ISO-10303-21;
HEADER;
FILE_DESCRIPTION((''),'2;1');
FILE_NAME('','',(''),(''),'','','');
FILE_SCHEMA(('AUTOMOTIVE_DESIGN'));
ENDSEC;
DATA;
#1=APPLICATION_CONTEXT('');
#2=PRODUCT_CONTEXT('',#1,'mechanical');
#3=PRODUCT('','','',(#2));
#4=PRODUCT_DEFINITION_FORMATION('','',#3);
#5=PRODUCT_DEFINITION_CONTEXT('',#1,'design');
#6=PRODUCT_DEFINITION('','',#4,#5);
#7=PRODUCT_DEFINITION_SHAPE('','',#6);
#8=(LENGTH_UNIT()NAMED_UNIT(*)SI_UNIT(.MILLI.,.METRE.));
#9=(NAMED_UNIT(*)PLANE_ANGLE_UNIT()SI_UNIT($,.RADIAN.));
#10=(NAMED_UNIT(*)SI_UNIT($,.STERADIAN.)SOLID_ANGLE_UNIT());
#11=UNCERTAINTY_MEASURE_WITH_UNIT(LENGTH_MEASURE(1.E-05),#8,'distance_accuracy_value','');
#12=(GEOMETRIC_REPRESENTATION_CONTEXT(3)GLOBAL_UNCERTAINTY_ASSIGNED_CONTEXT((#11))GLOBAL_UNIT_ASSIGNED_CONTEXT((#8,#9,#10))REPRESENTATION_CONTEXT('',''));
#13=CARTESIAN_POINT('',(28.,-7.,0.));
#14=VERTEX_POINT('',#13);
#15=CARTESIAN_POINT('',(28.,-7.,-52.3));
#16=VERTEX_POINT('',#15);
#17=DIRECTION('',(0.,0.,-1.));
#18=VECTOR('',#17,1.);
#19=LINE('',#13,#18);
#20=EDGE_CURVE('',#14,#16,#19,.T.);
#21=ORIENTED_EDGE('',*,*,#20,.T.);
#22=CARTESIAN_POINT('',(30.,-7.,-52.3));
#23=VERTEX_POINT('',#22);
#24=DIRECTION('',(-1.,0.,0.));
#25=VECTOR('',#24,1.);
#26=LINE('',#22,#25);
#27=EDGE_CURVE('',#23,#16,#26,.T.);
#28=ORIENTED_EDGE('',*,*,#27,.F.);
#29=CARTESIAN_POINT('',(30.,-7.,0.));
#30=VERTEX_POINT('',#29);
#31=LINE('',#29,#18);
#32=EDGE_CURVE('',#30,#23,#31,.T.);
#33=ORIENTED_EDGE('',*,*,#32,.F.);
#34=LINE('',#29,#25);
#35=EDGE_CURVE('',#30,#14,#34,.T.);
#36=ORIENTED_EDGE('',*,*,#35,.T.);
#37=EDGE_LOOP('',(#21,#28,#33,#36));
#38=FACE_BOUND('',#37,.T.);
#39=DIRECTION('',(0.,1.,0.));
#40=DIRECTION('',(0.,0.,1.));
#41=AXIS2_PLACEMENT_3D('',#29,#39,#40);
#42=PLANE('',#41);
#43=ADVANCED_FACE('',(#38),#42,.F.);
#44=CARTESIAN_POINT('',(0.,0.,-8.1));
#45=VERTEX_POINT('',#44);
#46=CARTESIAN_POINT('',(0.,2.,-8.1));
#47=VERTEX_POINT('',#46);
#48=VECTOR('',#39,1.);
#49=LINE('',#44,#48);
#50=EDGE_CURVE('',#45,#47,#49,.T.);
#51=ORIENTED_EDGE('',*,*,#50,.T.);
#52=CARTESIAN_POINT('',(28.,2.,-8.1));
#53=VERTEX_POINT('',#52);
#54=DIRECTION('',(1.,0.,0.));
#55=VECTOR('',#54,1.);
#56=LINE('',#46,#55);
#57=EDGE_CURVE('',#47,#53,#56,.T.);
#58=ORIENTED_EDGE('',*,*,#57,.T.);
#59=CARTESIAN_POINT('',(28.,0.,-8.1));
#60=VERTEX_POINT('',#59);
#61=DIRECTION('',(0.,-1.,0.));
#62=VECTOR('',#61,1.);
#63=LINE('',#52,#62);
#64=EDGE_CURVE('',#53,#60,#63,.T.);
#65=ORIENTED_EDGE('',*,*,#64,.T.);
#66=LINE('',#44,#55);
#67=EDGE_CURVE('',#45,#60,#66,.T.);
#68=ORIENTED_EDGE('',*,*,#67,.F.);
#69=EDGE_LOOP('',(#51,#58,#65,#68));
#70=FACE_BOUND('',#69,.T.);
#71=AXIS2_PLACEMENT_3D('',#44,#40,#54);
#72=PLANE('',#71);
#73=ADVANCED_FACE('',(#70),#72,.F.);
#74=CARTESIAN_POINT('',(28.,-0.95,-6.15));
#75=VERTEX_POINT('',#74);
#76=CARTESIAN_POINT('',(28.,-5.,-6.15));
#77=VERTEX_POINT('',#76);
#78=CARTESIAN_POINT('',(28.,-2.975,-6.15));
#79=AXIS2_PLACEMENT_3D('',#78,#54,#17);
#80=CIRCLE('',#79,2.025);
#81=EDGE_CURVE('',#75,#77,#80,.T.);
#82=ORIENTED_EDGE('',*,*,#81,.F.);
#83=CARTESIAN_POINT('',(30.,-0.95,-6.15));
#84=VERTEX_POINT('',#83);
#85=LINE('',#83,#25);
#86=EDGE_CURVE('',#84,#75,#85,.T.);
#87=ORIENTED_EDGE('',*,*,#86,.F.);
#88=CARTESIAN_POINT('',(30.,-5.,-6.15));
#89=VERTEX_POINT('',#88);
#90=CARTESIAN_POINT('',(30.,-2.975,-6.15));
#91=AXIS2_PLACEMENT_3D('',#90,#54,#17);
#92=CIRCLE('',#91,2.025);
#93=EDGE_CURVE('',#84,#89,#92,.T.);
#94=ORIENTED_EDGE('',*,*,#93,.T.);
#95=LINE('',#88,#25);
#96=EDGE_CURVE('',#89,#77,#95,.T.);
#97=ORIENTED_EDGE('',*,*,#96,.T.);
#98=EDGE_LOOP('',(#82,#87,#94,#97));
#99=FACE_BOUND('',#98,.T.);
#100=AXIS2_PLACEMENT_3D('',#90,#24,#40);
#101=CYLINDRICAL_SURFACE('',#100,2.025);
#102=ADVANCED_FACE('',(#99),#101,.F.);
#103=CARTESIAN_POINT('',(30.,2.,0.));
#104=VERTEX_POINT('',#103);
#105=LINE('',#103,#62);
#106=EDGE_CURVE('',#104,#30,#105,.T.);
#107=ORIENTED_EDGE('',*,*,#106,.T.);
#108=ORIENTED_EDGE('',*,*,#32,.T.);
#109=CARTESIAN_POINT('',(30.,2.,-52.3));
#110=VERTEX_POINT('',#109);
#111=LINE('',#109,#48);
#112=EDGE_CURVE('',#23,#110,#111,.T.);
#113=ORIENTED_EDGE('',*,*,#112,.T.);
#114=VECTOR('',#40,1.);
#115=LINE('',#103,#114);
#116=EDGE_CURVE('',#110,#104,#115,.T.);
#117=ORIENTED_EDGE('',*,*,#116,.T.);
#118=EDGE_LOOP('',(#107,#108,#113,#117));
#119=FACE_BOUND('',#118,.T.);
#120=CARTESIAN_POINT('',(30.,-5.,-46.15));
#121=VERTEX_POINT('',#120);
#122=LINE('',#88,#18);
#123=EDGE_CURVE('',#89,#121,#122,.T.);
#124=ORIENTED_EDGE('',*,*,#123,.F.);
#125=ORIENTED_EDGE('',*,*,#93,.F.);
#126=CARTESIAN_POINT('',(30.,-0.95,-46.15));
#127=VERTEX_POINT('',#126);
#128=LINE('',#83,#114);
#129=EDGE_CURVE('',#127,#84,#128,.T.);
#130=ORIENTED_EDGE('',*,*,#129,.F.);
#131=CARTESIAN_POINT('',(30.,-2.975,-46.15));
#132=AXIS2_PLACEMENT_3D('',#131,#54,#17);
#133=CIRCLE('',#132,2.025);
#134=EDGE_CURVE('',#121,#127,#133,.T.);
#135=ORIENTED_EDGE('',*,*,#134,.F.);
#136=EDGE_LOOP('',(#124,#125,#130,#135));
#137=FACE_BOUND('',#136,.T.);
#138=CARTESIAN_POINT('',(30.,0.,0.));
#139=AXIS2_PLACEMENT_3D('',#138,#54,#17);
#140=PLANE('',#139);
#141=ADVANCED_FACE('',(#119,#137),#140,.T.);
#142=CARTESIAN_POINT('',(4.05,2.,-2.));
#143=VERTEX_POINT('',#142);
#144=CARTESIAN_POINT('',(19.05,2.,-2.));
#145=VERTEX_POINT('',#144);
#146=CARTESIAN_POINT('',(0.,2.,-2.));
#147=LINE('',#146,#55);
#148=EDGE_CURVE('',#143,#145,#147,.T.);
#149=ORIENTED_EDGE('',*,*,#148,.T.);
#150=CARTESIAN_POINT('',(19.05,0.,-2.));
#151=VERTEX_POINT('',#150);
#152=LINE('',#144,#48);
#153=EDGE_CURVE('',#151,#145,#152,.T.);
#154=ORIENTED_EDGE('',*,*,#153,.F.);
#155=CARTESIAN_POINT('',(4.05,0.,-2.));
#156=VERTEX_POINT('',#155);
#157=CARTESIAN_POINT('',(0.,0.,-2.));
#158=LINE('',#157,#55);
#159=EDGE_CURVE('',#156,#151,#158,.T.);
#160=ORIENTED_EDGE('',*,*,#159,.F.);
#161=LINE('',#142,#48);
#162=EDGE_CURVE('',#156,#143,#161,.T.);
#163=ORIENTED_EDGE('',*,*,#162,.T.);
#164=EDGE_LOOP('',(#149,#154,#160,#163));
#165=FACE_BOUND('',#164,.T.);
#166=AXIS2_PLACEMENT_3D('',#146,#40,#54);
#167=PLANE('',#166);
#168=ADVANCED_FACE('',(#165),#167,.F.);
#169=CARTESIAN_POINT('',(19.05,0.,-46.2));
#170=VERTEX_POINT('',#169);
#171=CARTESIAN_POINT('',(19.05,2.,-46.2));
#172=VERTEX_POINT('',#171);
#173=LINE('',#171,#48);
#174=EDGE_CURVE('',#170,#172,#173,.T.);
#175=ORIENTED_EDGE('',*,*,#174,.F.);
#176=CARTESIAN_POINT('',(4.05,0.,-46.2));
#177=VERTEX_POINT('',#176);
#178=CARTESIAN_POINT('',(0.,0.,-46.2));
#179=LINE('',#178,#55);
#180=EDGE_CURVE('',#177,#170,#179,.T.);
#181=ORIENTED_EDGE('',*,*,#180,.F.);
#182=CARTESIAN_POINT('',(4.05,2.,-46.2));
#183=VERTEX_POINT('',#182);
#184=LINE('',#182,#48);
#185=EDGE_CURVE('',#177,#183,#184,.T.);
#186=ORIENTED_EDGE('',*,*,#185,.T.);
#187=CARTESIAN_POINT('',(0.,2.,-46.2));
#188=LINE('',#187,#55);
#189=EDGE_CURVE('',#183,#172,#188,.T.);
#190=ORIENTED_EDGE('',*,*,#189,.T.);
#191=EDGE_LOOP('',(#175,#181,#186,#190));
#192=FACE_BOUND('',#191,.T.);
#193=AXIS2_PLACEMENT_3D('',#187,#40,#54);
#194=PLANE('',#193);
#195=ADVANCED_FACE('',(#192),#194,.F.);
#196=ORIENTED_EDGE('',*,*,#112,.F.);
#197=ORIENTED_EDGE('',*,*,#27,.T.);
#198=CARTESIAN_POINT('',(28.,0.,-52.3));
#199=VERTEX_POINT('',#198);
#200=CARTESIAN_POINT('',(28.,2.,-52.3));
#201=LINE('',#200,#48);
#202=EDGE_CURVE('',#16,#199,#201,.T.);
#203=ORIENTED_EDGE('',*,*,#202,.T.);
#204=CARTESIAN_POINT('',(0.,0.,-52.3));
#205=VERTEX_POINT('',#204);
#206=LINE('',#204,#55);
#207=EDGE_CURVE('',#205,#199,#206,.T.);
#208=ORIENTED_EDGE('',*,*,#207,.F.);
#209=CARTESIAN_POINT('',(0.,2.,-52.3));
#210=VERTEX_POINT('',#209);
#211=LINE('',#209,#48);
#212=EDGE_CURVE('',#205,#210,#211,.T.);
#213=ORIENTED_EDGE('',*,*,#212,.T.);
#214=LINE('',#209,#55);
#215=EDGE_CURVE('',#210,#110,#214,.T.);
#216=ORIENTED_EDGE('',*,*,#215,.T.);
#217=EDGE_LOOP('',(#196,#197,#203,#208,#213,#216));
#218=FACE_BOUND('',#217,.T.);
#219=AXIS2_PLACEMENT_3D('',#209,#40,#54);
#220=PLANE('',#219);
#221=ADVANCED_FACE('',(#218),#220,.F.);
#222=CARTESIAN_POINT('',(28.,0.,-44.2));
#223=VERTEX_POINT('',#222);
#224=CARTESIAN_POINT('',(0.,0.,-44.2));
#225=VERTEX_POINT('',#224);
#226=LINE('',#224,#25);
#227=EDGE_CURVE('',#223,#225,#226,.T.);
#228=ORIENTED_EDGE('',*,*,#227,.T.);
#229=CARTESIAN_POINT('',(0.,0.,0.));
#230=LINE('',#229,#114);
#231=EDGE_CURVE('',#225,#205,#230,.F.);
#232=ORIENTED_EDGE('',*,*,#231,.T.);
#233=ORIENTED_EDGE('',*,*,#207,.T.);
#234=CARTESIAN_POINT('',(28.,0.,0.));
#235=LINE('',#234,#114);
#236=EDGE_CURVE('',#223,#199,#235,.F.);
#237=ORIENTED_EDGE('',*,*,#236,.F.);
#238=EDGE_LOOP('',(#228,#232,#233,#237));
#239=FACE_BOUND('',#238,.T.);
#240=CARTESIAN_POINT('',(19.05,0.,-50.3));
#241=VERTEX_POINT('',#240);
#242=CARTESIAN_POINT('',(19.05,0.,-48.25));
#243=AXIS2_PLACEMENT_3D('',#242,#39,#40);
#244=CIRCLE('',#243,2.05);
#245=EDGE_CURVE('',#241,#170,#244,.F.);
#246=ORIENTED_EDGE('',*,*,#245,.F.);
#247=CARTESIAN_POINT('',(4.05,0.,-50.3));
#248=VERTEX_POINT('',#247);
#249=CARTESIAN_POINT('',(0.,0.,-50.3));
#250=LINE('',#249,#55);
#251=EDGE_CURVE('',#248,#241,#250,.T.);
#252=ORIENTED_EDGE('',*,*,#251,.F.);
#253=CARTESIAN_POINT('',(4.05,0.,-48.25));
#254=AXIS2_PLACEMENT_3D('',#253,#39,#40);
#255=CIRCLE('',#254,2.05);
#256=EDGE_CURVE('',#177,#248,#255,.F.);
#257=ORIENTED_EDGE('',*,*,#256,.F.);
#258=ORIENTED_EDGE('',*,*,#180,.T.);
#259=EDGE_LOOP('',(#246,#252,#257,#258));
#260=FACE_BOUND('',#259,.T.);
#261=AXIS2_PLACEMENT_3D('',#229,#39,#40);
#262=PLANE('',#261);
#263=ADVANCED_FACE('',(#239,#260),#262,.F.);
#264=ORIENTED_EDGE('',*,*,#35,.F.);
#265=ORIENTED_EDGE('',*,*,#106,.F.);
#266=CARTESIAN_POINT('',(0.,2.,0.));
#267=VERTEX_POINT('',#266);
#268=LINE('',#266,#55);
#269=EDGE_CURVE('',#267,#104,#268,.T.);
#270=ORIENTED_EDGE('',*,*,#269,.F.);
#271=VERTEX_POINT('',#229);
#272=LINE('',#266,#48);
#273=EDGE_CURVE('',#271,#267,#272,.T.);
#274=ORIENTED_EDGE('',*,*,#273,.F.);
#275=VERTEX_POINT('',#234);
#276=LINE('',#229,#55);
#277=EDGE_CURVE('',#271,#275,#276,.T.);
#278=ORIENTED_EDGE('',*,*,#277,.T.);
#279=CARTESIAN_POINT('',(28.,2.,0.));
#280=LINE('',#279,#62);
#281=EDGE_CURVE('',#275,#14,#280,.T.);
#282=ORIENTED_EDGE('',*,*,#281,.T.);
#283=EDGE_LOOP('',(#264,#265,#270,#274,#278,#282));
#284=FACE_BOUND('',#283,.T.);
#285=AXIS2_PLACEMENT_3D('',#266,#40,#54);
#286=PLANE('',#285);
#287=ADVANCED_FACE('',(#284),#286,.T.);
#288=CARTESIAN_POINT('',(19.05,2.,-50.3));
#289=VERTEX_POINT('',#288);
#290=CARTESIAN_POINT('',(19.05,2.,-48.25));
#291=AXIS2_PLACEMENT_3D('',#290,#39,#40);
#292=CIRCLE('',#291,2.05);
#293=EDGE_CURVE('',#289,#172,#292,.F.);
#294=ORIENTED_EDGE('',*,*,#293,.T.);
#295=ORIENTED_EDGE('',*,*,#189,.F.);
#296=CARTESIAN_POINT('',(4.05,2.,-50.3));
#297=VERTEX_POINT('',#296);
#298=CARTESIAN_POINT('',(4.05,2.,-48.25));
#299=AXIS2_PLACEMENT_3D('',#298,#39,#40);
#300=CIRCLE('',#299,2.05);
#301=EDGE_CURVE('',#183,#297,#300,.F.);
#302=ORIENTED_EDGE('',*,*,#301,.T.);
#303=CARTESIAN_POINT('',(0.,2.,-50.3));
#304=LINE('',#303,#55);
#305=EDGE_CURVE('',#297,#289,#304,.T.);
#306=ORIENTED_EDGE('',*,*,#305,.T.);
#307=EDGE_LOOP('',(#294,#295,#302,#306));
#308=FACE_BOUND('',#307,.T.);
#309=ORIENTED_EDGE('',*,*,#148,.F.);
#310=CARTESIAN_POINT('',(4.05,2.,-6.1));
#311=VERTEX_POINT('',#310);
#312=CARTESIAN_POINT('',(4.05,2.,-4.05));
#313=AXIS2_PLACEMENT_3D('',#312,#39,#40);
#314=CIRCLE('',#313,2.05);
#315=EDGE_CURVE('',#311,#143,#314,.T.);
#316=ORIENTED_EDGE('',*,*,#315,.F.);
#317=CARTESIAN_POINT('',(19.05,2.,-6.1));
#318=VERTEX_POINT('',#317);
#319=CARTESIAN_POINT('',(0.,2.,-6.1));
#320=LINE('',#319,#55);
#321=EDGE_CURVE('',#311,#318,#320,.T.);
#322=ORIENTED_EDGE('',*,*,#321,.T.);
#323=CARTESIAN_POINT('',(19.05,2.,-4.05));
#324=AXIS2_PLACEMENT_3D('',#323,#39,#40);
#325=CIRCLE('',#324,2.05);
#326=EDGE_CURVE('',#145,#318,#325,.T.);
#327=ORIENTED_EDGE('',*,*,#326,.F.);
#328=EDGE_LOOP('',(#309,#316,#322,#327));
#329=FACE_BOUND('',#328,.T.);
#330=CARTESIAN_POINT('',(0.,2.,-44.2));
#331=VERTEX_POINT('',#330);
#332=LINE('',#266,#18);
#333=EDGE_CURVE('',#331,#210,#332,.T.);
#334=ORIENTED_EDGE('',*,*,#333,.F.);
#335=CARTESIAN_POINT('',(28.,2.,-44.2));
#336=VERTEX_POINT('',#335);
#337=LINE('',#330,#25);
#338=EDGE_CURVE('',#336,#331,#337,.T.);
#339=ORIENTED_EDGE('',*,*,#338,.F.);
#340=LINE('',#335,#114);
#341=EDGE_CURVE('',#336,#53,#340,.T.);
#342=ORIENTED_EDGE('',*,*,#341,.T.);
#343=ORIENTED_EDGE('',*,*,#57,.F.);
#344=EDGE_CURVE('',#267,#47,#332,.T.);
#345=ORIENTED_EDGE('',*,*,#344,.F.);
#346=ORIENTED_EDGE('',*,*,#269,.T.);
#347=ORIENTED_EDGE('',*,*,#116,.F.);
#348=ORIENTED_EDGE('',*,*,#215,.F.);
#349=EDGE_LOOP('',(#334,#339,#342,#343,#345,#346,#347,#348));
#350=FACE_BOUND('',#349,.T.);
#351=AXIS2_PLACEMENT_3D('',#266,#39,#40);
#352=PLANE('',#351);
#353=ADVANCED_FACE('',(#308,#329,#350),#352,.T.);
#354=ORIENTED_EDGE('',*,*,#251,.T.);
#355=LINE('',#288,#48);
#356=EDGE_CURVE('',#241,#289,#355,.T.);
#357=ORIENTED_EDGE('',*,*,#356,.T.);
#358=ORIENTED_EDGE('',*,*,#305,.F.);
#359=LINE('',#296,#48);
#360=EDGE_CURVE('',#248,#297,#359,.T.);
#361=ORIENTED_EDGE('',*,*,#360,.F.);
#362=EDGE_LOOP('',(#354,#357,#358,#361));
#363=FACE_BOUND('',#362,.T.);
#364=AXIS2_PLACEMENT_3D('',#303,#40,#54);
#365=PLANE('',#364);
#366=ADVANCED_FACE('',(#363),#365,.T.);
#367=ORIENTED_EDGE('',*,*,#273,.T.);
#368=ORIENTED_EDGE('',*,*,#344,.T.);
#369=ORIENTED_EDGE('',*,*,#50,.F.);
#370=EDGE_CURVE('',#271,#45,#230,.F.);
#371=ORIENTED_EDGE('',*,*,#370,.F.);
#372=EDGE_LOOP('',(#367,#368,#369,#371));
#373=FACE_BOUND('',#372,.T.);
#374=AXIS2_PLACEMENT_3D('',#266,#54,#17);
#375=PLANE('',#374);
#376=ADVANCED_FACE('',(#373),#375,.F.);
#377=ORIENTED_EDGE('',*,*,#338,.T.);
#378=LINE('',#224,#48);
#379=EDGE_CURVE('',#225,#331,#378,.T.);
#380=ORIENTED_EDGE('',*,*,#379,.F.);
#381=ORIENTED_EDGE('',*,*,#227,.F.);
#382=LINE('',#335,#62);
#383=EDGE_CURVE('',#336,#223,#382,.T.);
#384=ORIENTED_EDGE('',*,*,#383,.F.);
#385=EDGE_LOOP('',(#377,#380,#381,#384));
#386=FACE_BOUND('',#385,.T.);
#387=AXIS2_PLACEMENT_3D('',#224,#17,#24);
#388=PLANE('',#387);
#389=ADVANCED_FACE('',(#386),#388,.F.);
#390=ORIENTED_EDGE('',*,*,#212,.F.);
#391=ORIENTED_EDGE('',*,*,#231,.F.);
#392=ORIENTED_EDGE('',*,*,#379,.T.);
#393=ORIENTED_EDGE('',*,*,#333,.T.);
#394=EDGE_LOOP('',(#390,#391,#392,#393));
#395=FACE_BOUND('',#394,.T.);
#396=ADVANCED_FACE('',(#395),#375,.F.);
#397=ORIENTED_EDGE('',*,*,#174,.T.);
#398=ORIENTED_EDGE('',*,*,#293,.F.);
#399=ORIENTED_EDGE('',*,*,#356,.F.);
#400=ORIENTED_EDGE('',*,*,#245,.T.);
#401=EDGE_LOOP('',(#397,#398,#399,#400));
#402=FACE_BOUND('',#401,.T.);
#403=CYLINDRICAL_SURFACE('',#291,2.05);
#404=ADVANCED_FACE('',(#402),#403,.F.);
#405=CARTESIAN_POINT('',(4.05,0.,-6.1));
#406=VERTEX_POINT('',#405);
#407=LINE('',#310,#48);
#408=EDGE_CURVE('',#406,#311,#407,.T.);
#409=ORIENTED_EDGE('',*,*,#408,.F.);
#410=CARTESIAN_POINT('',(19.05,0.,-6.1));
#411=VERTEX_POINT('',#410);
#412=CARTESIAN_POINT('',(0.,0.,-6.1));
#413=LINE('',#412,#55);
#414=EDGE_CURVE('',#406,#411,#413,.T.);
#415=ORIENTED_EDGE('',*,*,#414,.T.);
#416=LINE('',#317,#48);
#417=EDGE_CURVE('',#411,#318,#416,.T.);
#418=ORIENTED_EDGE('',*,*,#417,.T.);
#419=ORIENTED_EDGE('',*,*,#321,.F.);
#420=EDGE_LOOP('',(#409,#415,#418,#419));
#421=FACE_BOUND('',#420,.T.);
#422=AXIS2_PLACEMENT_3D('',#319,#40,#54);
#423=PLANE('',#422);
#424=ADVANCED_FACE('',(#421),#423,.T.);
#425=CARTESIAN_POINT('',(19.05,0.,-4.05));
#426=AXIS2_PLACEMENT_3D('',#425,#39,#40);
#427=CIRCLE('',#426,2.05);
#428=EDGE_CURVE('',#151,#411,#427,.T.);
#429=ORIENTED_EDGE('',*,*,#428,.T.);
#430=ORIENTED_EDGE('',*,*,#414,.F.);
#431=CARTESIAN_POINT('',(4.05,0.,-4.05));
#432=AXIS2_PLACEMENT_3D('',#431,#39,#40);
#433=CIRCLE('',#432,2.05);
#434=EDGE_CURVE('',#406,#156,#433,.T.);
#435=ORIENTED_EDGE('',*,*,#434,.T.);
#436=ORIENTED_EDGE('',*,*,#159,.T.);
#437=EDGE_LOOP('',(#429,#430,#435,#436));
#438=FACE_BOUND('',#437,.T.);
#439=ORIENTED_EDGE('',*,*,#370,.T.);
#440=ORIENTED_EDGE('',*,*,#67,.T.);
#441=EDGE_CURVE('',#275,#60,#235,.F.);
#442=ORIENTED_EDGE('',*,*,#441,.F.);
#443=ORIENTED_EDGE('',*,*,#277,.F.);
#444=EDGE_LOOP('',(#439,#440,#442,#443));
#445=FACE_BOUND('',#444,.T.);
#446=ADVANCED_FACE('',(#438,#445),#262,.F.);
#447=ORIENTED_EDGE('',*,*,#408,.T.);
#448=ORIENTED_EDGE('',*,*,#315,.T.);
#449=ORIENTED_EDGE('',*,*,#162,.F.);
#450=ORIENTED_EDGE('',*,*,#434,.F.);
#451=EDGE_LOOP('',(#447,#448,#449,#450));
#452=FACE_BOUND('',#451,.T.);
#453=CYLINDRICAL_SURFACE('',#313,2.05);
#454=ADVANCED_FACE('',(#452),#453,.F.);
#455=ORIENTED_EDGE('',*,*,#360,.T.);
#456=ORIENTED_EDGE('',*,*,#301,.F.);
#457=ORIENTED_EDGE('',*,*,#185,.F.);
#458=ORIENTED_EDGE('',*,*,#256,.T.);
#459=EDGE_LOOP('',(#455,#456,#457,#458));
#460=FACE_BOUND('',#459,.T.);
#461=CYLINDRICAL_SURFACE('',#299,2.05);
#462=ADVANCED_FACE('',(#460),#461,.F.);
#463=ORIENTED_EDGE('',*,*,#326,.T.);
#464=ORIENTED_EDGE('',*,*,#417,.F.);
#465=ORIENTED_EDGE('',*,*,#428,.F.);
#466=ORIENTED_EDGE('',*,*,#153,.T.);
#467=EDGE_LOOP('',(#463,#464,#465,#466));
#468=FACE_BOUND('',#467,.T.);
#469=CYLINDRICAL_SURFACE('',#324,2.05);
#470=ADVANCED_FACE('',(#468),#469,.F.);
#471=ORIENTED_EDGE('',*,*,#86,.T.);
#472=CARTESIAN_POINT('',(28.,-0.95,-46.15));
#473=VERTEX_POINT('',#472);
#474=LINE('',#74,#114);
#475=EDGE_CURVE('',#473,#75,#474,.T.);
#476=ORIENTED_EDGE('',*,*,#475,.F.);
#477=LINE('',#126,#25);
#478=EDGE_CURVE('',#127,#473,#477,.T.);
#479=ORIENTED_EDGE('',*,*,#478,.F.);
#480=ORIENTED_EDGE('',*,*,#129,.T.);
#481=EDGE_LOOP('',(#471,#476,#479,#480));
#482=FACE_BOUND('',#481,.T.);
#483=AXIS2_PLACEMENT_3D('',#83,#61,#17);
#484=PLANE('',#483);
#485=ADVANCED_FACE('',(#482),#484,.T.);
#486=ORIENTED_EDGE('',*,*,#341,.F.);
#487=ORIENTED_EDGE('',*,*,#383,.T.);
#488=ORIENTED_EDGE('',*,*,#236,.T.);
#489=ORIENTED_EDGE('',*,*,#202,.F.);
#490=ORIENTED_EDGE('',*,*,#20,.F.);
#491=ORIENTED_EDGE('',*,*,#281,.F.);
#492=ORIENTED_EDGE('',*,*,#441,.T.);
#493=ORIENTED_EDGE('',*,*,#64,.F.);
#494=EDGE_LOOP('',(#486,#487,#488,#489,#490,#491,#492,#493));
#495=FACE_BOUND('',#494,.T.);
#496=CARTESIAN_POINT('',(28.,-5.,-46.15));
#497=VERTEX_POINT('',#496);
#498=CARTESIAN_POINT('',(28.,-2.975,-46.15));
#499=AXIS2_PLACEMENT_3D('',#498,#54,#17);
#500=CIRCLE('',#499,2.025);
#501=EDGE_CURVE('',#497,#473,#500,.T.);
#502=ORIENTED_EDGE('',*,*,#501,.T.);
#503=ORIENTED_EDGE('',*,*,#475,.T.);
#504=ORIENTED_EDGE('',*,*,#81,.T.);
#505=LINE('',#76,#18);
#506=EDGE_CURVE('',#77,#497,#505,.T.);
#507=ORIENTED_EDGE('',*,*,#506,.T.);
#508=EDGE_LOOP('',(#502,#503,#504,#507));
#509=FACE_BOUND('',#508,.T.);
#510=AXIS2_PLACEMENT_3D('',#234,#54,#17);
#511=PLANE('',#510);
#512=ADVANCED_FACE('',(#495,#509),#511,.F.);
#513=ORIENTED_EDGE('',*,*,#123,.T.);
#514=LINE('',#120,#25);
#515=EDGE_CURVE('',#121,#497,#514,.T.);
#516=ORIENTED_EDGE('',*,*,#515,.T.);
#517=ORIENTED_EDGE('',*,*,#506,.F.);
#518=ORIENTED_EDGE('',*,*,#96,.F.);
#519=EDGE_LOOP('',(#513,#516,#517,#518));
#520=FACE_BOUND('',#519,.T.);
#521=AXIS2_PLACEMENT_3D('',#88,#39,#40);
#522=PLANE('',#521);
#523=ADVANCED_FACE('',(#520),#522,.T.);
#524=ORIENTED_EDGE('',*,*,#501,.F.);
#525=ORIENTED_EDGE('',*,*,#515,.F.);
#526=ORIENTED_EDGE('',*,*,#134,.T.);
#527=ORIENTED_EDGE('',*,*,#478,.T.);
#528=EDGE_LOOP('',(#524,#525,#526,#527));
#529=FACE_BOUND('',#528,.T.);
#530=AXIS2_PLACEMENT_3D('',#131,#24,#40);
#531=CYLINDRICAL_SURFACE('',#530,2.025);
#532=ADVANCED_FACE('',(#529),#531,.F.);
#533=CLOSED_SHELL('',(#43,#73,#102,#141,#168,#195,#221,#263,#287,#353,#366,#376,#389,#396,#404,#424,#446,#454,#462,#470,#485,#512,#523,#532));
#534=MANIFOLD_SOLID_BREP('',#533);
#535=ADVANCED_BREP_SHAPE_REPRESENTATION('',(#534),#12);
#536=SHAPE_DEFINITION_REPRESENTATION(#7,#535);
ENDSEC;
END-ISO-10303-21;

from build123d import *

# Parameters (mm, degrees)
SKETCH1_W           = 28
SKETCH1_H           = 26.15
BOSS_EXTRUDE1_DEPTH = 2
SKETCH12_W          = 52.3
SKETCH12_H          = 9
BOSS_EXTRUDE2_DEPTH = 2
SKETCH13_W          = 30
SKETCH13_H          = 36.1
CUT_EXTRUDE3_DEPTH  = 2
SKETCH15_W          = 2
SKETCH15_H          = 36.1
BOSS_EXTRUDE3_DEPTH = 2


with BuildPart() as part:
    # Sketch1 → Boss-Extrude1 (new body)
    # profile 1 of 2: a face of its own
    with BuildSketch(Plane(origin=(0, 0, 0), x_dir=(1, 0, 0), z_dir=(0, 1, 0))):
        with Locations((14, 39.225)):
            Rectangle(SKETCH1_W, SKETCH1_H)
        with BuildLine():
            Line((19.05, 46.2), (4.05, 46.2))
            ThreePointArc((4.05, 46.2), (2, 48.25), (4.05, 50.3))
            Line((4.05, 50.3), (19.05, 50.3))
            ThreePointArc((19.05, 50.3), (21.1, 48.25), (19.05, 46.2))
        make_face(mode=Mode.SUBTRACT)
    # profile 2 of 2: a face of its own
    with BuildSketch(Plane(origin=(0, 0, 0), x_dir=(1, 0, 0), z_dir=(0, 1, 0))):
        with Locations((14, 13.075)):
            Rectangle(SKETCH1_W, SKETCH1_H)
        with BuildLine():
            ThreePointArc((4.05, 2), (2, 4.05), (4.05, 6.1))
            Line((4.05, 6.1), (19.05, 6.1))
            ThreePointArc((19.05, 6.1), (21.1, 4.05), (19.05, 2))
            Line((19.05, 2), (4.05, 2))
        make_face(mode=Mode.SUBTRACT)
    extrude(amount=BOSS_EXTRUDE1_DEPTH)

    # Sketch12 → Boss-Extrude2 (add)
    with BuildSketch(Plane(origin=(28, 0, 0), x_dir=(0, 0, -1), z_dir=(1, 0, 0))):
        with Locations((26.15, -2.5)):
            Rectangle(SKETCH12_W, SKETCH12_H)
        with BuildLine():
            Line((6.15, -0.95), (46.15, -0.95))
            ThreePointArc((46.15, -0.95), (48.175, -2.975), (46.15, -5))
            Line((46.15, -5), (6.15, -5))
            ThreePointArc((6.15, -5), (4.125, -2.975), (6.15, -0.95))
        make_face(mode=Mode.SUBTRACT)
    extrude(amount=BOSS_EXTRUDE2_DEPTH)

    # Sketch13 → Cut-Extrude3 (cut)
    with BuildSketch(Plane(origin=(0, 2, 0), x_dir=(1, 0, 0), z_dir=(0, 1, 0))):
        with Locations((15, 26.15)):
            Rectangle(SKETCH13_W, SKETCH13_H)
    extrude(amount=-CUT_EXTRUDE3_DEPTH, mode=Mode.SUBTRACT)

    # Sketch15 → Boss-Extrude3 (add)
    with BuildSketch(Plane(origin=(0, 0, 0), x_dir=(1, 0, 0), z_dir=(0, 1, 0))):
        with Locations((29, 26.15)):
            Rectangle(SKETCH15_W, SKETCH15_H)
    extrude(amount=BOSS_EXTRUDE3_DEPTH)


solid = part.part
